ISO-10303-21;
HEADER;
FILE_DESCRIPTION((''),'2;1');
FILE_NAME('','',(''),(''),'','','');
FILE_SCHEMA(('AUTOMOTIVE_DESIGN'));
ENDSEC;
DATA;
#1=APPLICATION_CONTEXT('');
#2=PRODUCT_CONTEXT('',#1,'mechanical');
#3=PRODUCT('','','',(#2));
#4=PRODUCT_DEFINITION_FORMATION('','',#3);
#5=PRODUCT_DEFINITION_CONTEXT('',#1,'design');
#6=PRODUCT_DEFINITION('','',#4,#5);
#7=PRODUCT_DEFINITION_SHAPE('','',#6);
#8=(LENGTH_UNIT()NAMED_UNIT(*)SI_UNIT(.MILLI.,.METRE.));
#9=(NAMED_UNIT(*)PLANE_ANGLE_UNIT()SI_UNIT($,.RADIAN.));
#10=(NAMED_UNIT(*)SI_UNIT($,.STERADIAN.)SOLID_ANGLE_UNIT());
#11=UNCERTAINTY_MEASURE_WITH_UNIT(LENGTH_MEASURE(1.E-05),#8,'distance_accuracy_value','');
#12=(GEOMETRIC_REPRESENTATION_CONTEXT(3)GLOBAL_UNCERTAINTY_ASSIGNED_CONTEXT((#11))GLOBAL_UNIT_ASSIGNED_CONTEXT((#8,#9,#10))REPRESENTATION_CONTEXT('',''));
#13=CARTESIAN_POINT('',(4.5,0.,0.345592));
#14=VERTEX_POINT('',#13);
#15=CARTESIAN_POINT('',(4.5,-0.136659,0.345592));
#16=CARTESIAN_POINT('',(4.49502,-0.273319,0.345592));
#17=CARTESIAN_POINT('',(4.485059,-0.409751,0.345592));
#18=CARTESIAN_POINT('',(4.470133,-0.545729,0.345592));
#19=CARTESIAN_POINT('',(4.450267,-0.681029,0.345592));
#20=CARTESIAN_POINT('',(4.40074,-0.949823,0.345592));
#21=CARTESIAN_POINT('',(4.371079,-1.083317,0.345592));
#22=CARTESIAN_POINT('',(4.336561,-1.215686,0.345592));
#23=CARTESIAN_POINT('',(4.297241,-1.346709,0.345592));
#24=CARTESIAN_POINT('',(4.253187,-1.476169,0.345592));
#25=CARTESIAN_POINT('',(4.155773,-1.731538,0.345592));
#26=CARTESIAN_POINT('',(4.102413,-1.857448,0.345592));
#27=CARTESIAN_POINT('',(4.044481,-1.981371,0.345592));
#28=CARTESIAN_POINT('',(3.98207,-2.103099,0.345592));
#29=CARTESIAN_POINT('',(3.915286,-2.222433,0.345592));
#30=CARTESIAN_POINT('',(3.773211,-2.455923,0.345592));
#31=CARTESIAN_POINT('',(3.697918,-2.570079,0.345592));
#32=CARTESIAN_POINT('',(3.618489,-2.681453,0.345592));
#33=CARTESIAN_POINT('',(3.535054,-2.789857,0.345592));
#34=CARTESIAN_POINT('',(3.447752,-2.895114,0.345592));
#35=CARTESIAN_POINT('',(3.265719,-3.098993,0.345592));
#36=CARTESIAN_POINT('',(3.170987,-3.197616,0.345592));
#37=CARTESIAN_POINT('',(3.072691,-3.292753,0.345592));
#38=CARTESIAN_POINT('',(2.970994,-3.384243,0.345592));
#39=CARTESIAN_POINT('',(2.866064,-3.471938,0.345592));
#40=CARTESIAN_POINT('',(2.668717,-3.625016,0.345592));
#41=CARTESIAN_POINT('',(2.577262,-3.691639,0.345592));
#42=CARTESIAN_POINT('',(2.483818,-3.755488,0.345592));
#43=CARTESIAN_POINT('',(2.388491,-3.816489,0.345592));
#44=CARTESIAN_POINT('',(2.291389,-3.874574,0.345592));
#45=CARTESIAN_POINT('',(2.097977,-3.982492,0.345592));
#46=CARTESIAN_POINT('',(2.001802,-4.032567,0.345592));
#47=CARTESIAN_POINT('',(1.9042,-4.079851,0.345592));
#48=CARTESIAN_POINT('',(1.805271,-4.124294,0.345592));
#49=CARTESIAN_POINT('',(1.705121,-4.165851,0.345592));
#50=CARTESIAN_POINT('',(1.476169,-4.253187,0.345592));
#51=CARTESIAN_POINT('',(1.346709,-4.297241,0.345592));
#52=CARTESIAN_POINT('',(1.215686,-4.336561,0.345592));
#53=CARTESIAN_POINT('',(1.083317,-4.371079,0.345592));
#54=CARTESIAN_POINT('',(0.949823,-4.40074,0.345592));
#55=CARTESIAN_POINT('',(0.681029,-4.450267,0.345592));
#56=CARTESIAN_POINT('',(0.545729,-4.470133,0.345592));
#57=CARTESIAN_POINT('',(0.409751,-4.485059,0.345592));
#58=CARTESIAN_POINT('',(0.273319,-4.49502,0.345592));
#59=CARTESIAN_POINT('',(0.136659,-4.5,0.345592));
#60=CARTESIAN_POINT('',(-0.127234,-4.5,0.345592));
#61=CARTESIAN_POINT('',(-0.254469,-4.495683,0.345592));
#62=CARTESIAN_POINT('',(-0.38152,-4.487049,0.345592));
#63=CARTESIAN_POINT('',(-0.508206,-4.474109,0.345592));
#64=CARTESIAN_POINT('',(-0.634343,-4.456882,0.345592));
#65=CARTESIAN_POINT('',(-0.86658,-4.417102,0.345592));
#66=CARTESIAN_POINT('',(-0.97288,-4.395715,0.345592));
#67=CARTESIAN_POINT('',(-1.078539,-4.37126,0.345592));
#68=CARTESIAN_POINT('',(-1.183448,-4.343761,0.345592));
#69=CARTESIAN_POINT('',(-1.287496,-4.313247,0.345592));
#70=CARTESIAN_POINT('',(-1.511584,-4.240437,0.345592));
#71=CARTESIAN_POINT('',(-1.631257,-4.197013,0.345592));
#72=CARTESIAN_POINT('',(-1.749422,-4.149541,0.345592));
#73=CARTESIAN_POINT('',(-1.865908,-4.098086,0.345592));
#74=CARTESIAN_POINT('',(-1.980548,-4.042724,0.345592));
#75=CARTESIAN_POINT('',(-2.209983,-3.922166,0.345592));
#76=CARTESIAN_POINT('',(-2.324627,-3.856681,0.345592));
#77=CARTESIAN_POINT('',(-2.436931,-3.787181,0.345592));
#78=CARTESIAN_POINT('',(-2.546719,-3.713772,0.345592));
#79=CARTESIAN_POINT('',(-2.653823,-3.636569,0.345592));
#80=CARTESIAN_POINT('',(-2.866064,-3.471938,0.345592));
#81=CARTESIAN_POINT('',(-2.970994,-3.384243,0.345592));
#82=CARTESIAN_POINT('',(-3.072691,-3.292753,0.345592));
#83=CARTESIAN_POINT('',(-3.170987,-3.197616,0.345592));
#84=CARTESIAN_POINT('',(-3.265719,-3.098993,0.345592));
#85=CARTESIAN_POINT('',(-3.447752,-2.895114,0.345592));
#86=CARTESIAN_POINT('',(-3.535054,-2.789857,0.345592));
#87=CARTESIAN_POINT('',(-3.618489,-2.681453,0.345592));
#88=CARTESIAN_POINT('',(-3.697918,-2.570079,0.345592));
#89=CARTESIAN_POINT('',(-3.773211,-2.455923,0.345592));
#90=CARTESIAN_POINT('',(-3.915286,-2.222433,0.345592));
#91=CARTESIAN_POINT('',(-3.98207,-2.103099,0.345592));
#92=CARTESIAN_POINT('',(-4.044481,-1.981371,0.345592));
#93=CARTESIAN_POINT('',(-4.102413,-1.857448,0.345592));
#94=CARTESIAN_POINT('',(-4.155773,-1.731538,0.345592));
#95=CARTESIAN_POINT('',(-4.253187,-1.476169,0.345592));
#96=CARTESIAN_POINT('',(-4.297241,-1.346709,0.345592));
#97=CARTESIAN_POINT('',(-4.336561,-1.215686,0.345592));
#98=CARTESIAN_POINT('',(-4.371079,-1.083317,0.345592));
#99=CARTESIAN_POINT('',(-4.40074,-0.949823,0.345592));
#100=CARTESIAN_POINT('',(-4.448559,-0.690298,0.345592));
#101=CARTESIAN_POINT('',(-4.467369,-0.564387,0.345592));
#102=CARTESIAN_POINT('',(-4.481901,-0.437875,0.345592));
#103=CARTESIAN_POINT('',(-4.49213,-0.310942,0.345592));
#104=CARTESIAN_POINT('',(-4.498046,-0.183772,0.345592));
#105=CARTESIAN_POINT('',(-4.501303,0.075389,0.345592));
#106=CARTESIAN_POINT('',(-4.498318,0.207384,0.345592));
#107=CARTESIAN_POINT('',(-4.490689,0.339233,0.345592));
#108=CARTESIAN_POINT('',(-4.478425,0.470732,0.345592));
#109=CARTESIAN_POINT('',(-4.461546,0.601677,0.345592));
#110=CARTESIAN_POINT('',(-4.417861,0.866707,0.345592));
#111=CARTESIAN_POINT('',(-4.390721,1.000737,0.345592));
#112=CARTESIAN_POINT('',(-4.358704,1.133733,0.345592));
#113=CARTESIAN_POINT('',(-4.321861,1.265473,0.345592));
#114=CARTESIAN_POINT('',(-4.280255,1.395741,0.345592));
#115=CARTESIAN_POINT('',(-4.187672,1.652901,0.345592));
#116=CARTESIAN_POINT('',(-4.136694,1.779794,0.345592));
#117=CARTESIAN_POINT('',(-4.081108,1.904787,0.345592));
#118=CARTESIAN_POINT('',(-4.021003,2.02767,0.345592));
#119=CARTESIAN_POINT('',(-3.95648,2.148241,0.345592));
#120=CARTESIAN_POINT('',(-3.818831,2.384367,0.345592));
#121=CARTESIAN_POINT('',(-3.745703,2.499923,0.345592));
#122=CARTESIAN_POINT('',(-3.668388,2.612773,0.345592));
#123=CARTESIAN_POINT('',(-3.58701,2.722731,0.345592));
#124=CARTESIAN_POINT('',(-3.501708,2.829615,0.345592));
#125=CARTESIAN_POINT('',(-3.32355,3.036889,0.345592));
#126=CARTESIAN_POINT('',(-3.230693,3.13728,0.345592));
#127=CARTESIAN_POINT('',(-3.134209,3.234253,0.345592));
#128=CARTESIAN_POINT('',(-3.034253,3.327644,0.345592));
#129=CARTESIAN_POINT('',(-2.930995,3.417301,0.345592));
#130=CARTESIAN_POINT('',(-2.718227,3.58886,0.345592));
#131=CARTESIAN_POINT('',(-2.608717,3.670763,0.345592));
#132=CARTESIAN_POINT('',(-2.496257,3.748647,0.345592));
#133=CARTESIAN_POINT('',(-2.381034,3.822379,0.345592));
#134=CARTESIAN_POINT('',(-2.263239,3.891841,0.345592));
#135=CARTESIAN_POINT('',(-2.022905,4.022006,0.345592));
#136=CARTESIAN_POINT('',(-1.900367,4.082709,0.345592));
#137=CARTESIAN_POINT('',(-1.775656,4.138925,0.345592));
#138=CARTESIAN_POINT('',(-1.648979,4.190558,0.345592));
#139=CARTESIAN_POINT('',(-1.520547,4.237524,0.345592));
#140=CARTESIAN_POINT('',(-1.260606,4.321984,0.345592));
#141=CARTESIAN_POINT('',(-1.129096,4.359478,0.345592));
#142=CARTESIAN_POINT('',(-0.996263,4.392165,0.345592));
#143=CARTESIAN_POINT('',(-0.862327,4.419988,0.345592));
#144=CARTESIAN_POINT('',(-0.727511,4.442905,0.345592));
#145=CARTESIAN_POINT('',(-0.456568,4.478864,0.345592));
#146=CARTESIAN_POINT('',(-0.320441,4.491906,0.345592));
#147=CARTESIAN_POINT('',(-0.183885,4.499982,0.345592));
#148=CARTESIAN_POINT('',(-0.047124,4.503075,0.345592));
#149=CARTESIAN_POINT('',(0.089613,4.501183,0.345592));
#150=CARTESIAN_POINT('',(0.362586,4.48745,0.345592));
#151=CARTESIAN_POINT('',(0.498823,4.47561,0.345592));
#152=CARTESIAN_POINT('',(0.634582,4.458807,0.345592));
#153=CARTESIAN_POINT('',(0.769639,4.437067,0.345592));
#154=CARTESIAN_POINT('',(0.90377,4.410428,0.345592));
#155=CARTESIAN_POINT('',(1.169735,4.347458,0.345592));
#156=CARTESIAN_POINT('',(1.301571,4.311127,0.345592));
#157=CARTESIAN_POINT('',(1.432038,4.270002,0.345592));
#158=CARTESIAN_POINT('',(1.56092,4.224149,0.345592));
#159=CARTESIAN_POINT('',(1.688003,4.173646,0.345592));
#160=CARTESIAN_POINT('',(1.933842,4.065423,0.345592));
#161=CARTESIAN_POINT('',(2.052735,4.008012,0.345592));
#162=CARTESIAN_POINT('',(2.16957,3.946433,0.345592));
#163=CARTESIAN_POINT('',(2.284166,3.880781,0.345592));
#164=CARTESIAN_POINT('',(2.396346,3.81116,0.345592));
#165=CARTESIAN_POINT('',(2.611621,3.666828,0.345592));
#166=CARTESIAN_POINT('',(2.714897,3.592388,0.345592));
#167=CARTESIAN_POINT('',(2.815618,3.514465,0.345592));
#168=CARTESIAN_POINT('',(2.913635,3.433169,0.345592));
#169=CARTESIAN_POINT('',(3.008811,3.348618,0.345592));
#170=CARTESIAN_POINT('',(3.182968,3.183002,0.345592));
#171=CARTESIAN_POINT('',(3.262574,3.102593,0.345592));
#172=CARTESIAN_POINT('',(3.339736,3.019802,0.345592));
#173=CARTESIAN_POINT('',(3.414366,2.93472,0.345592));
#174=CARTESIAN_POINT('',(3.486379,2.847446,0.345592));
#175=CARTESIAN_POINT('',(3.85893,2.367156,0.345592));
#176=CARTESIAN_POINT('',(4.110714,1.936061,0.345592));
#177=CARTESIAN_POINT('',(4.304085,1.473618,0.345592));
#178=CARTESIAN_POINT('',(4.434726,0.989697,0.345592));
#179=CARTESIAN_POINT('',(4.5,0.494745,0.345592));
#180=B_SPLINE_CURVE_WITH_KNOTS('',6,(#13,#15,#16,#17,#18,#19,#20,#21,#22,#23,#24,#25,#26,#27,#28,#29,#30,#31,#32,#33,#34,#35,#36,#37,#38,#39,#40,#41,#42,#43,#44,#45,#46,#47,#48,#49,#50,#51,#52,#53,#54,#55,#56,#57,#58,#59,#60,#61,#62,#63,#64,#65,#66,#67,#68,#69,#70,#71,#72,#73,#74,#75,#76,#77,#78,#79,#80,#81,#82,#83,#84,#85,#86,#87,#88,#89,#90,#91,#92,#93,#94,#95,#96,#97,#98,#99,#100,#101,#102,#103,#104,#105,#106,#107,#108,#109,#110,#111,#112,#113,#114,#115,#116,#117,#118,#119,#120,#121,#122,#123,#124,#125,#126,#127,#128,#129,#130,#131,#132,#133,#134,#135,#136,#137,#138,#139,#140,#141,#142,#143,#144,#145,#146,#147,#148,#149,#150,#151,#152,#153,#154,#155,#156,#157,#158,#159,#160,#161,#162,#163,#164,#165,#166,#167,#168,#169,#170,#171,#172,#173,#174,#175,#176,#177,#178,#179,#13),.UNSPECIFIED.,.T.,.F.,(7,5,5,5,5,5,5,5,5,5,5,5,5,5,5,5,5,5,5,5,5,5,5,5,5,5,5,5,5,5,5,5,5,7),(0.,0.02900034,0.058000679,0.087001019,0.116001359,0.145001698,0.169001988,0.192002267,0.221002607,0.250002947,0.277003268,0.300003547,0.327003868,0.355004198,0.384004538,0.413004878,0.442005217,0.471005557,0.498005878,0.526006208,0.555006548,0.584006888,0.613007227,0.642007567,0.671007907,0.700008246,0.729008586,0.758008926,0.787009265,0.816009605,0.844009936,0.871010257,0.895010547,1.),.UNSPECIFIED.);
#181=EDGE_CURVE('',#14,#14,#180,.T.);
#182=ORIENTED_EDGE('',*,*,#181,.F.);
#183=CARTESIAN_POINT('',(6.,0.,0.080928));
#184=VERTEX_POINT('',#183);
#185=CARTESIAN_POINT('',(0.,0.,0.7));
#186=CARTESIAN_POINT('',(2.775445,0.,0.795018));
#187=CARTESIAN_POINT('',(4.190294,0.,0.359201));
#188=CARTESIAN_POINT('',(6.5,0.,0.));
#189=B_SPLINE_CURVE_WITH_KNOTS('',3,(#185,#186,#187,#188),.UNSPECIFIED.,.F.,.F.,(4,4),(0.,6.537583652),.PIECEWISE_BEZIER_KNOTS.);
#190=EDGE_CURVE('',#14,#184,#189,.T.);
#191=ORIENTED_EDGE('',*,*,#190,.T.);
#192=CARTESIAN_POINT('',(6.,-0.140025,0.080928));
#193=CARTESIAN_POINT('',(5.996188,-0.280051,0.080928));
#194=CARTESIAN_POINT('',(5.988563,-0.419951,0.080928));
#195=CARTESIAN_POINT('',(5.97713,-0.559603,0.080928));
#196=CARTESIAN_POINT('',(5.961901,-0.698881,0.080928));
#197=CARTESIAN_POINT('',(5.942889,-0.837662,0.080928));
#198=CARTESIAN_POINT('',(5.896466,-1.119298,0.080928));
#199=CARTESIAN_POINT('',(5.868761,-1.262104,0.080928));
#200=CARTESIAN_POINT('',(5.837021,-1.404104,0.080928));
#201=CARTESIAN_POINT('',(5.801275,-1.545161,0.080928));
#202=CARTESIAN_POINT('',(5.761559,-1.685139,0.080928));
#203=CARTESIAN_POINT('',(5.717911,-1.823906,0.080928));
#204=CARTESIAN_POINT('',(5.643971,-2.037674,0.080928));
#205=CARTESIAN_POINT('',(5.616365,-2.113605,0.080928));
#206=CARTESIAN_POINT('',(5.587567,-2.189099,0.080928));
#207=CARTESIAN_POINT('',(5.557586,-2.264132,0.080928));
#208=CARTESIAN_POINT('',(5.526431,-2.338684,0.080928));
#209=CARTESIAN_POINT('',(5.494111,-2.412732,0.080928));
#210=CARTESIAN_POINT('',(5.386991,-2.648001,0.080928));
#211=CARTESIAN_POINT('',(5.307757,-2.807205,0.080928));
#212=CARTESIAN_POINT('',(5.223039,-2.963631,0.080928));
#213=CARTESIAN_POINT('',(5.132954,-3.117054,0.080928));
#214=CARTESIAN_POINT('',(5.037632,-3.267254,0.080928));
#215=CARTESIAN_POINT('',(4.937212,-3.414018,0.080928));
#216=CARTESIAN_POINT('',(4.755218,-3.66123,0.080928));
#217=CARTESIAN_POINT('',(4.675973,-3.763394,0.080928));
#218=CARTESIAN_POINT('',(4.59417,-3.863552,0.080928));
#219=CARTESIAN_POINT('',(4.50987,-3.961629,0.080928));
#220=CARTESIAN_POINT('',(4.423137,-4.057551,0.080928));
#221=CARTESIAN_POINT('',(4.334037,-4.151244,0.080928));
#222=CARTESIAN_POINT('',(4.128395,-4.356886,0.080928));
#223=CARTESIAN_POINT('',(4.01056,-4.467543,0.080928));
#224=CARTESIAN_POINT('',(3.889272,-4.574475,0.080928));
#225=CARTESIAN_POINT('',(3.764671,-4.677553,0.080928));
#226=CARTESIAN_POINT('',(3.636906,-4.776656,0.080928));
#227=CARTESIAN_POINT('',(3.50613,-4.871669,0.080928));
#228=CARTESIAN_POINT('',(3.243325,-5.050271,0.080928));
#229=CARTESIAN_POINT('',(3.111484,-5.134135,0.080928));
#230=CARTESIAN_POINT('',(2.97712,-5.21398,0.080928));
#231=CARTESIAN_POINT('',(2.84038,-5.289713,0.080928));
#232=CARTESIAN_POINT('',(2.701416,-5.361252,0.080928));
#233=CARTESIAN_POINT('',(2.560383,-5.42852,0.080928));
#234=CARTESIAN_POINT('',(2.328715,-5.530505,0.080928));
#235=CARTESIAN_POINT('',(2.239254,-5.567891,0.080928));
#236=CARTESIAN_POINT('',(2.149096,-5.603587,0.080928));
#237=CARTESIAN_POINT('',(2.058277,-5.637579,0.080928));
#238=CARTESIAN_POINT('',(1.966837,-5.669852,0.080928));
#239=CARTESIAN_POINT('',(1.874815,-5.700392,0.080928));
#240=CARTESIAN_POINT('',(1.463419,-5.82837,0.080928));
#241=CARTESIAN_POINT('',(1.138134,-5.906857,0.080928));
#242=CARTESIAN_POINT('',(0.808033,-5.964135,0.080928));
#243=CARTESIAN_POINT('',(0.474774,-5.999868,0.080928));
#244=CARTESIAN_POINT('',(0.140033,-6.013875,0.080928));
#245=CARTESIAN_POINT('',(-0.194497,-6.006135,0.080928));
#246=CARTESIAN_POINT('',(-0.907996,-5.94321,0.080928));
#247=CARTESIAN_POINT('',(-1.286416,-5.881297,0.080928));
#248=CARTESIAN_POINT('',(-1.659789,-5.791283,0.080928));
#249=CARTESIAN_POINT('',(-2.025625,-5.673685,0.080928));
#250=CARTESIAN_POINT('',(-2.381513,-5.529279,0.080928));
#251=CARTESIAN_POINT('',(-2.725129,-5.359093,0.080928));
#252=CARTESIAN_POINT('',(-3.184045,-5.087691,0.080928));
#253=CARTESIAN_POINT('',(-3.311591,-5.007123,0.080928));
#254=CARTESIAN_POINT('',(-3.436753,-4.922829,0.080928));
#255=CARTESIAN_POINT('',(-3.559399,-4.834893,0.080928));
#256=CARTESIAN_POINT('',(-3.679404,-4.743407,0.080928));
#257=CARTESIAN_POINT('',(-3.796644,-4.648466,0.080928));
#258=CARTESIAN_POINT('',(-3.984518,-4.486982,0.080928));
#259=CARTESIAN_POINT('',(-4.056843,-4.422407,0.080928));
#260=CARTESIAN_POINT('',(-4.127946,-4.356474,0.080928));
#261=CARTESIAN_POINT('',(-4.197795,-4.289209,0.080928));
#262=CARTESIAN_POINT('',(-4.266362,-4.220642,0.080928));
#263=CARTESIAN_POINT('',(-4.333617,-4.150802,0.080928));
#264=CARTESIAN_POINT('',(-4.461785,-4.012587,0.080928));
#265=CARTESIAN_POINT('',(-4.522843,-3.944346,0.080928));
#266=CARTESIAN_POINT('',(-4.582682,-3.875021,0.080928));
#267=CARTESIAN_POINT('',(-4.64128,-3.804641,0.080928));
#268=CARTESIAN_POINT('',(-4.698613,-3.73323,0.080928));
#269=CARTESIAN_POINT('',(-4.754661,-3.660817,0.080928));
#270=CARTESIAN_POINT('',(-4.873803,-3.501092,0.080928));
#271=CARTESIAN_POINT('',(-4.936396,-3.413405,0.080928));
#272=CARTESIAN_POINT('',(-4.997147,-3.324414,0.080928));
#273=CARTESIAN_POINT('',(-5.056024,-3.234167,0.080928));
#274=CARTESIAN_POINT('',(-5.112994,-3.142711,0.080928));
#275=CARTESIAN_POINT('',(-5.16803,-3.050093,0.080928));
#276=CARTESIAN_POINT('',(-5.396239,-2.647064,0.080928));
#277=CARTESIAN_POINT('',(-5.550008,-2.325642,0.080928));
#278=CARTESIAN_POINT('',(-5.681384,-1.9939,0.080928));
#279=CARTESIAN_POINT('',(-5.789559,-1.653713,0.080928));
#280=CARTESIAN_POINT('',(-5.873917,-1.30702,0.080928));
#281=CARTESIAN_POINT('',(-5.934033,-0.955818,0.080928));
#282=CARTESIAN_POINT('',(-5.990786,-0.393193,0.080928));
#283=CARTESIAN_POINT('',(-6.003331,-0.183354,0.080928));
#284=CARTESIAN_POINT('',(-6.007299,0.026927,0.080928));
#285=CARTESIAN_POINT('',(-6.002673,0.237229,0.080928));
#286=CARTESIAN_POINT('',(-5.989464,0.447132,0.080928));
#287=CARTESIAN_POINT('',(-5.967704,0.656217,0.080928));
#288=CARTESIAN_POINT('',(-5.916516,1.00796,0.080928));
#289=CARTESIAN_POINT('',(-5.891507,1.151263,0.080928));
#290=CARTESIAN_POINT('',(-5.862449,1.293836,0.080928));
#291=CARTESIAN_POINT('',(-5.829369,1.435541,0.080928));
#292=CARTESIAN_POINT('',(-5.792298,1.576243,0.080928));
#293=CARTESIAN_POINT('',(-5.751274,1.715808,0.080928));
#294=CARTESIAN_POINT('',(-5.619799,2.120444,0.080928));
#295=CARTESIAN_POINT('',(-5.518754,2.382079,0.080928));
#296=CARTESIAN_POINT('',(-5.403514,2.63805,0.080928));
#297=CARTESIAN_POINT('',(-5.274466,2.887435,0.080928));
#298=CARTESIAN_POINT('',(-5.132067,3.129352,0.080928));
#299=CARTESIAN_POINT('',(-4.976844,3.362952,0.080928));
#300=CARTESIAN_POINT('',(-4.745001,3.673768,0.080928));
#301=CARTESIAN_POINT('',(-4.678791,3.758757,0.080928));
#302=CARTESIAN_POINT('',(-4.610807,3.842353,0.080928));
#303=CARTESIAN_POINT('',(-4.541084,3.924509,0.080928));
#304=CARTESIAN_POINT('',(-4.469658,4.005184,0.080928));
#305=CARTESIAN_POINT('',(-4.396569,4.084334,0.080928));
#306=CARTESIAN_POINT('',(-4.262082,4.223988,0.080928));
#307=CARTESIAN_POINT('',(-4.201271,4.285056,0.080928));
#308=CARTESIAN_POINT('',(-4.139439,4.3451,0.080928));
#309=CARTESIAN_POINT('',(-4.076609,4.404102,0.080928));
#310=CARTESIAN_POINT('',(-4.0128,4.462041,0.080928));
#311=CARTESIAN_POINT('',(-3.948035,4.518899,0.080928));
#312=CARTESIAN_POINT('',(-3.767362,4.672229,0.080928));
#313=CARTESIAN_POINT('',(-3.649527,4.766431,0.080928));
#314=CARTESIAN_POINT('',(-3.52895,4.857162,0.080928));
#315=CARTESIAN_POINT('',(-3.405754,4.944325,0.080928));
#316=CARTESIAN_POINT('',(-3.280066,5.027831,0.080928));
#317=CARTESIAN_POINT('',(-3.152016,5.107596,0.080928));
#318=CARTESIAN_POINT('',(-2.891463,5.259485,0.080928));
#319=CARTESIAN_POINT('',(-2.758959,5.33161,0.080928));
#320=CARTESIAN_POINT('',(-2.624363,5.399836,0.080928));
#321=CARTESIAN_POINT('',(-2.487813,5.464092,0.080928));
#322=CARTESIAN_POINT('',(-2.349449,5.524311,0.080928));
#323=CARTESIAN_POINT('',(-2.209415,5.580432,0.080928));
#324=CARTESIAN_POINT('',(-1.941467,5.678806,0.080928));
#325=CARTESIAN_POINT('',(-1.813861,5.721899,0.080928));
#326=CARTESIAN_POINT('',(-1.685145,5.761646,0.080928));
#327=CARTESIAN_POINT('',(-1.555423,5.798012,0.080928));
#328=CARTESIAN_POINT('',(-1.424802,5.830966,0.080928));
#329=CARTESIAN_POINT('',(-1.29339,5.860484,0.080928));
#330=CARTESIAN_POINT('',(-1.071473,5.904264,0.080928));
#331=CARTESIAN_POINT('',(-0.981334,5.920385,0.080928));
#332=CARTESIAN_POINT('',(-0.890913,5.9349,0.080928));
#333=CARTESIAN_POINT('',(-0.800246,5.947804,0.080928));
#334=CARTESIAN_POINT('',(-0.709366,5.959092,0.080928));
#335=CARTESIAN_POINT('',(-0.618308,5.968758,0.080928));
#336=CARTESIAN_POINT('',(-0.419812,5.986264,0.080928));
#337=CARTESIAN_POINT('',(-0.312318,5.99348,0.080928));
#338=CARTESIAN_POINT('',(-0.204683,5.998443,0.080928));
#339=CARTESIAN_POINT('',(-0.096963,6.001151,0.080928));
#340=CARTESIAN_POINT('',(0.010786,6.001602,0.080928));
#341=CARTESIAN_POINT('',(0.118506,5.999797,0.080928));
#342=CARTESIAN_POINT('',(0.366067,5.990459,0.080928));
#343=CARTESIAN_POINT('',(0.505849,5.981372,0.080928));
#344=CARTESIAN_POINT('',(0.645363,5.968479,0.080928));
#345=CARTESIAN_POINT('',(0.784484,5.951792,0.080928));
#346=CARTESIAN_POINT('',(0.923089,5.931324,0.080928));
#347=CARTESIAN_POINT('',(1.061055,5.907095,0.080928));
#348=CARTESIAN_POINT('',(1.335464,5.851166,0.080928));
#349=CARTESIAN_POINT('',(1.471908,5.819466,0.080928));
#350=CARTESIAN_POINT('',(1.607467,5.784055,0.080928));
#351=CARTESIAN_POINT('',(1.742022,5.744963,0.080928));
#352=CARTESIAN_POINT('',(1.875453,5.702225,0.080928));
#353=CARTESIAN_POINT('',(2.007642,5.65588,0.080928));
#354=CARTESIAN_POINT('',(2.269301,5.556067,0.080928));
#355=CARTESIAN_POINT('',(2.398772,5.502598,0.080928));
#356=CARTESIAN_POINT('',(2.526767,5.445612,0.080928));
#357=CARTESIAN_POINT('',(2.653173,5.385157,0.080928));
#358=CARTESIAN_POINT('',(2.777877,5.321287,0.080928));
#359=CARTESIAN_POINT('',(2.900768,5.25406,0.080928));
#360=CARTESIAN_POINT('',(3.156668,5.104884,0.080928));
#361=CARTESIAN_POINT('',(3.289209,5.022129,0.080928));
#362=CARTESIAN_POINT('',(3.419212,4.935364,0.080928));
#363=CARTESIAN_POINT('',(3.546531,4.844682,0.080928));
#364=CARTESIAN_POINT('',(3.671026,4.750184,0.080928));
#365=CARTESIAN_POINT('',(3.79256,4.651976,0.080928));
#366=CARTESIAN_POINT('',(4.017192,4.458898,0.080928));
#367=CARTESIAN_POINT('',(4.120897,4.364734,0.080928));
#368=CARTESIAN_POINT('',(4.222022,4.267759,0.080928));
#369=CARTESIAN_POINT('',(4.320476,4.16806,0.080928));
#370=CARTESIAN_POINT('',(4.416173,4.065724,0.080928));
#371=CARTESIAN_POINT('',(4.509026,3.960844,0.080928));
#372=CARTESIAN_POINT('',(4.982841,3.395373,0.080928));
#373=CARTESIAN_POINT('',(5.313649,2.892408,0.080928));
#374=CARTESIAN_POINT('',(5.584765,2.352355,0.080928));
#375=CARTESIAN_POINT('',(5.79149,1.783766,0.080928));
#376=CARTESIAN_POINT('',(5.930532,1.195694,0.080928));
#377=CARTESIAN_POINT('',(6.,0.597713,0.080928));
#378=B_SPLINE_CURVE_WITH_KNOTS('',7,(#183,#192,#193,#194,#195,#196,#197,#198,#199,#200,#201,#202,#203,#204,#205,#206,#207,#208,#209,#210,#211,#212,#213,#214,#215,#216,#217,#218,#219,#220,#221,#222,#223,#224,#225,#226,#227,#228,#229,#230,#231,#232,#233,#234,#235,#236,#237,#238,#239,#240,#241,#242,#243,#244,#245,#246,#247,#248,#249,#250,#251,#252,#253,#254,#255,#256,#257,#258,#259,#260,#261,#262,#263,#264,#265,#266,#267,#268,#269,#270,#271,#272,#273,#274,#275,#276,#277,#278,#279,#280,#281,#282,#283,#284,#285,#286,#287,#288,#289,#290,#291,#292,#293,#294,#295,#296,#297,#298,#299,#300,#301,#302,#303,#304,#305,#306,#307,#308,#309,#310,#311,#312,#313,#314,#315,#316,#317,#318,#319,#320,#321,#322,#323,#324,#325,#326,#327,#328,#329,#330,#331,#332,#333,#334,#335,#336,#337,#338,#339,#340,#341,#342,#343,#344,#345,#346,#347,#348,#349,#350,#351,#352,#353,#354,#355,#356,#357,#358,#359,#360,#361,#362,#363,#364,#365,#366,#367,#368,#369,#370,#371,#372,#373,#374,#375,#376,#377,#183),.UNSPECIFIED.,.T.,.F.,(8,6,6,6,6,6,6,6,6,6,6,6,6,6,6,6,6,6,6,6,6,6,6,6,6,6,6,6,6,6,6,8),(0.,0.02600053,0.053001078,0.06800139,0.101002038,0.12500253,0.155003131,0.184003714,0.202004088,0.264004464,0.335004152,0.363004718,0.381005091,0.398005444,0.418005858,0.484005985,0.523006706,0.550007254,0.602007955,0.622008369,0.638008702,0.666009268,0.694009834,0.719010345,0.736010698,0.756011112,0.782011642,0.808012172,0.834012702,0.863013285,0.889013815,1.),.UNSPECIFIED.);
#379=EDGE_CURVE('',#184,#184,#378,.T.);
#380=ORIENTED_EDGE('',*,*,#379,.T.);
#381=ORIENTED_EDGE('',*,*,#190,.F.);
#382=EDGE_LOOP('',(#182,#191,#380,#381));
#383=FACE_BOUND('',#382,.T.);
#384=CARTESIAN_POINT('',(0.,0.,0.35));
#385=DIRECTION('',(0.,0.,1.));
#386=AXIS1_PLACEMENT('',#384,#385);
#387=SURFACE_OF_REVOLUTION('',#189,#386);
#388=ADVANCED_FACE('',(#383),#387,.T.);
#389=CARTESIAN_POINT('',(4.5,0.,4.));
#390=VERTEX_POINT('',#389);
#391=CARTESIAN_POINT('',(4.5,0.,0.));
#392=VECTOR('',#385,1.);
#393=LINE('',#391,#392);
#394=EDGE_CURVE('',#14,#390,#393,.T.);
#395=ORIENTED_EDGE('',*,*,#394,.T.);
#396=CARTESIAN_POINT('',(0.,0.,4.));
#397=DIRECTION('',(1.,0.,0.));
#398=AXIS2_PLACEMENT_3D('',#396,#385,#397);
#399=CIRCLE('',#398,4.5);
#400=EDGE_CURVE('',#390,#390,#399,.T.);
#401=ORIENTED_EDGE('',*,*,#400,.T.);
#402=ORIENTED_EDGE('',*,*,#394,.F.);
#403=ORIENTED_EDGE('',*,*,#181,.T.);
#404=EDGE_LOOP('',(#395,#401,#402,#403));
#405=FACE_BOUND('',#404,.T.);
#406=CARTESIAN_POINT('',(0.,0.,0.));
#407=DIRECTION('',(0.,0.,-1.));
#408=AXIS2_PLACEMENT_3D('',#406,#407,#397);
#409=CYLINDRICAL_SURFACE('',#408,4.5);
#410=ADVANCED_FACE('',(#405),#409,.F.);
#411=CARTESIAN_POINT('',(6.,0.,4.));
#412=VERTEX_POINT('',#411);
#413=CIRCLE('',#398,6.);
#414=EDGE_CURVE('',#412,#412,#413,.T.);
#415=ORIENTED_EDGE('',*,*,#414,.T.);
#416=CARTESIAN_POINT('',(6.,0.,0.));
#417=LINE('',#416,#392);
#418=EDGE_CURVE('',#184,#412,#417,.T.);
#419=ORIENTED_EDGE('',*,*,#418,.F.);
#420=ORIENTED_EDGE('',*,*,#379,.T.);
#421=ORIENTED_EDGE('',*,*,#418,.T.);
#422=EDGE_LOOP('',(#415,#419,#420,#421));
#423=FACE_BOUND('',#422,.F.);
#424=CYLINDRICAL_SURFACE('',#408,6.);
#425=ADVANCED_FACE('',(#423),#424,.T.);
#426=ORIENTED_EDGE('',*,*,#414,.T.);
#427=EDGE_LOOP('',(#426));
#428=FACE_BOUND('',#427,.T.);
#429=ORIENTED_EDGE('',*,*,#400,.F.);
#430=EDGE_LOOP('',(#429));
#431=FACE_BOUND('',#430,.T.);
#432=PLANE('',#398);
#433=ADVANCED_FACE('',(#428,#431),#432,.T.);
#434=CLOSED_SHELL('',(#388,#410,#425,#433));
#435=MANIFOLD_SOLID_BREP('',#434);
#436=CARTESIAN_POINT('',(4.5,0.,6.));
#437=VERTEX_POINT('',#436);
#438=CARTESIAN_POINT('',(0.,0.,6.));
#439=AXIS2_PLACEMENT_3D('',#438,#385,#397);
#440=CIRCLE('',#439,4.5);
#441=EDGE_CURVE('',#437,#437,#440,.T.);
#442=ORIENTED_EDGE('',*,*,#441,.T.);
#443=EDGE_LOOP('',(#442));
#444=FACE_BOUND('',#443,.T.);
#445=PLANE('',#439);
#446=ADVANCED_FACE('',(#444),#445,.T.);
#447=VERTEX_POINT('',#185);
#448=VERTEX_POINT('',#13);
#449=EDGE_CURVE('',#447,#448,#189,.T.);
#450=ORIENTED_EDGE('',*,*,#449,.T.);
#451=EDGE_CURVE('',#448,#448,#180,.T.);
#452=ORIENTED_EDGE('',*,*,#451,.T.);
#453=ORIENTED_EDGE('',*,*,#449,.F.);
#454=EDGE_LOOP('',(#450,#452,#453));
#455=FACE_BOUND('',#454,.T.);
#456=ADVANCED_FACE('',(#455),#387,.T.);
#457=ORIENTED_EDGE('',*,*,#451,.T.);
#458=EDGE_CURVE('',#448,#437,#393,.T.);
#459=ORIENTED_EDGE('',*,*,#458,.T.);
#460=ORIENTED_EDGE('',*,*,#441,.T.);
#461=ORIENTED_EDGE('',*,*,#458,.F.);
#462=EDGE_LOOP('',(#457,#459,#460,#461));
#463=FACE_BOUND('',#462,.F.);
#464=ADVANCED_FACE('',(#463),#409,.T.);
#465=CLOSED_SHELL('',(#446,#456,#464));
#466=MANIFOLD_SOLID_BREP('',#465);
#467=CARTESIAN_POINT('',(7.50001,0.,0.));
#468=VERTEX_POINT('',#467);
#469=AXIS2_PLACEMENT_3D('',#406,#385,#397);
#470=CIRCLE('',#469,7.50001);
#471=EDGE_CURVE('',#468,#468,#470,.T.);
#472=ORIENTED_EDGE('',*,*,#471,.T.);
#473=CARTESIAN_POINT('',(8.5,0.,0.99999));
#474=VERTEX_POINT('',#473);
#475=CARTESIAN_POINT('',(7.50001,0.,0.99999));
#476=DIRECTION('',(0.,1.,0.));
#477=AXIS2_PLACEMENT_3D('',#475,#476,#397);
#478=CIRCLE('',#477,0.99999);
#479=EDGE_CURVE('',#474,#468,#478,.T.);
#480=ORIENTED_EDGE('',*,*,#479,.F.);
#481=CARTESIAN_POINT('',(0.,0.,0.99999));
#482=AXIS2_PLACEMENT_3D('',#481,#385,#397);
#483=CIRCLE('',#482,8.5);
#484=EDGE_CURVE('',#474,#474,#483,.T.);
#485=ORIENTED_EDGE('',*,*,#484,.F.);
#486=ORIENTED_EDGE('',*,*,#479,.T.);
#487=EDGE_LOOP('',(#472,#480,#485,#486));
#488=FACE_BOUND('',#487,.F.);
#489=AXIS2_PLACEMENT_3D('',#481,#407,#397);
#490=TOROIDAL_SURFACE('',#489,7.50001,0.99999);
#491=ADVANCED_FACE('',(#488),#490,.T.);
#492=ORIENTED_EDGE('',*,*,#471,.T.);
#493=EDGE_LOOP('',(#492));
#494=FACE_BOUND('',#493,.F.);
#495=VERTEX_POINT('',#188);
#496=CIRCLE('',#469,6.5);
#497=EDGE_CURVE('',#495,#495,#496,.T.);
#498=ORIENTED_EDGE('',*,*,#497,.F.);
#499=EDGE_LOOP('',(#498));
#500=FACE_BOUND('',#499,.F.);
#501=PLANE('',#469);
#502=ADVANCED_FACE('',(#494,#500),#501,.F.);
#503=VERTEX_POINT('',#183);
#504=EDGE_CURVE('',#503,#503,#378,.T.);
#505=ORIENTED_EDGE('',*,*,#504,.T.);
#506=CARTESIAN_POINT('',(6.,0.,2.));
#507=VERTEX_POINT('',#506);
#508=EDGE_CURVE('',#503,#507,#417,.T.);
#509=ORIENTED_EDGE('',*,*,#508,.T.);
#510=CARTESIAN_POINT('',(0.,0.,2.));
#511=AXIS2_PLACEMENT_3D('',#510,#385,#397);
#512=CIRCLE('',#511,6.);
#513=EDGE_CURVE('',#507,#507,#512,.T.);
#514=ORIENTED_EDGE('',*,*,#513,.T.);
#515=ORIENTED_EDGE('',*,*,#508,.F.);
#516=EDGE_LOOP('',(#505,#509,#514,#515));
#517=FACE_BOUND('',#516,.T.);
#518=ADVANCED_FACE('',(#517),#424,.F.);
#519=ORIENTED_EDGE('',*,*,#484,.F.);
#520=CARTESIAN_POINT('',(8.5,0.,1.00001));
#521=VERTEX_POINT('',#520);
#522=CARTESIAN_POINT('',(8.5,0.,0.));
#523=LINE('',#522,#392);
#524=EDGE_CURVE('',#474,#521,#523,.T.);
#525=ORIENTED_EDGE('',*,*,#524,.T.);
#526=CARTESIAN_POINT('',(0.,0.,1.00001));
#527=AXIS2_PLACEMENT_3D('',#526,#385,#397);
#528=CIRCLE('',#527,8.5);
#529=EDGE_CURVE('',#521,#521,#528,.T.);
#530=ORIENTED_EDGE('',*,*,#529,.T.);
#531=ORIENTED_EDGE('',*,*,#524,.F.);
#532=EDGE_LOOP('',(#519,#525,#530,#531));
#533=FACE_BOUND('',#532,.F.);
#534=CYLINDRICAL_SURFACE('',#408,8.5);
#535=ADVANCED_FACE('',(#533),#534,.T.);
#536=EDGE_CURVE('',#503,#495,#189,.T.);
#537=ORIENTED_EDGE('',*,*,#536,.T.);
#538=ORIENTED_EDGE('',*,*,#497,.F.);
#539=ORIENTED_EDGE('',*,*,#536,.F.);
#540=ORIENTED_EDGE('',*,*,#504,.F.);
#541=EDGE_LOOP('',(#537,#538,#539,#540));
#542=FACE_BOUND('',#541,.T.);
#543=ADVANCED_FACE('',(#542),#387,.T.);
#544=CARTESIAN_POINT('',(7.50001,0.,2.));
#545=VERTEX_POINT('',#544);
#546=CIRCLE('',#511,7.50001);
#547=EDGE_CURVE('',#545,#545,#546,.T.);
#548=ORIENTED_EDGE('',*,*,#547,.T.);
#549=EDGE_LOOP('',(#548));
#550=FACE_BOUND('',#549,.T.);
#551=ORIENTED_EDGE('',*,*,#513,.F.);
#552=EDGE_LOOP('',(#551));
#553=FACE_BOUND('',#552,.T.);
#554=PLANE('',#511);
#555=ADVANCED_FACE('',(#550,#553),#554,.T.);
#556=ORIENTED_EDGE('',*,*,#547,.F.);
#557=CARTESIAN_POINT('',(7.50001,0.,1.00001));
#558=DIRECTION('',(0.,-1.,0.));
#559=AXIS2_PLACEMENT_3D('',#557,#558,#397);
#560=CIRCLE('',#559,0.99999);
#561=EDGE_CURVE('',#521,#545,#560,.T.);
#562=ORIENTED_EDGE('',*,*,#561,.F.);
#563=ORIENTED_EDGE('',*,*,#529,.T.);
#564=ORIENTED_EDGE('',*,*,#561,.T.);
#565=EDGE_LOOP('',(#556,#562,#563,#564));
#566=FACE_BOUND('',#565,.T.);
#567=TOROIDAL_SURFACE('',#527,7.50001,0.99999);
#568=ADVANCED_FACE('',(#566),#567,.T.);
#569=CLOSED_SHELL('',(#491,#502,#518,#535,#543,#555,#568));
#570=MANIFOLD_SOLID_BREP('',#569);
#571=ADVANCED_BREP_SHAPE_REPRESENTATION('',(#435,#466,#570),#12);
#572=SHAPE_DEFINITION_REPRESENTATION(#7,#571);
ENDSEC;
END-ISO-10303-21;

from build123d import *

# Parameters (mm, degrees)
F0_R     = 4.5
F1_DEPTH = 6
F0_R_2   = 6
F2_DEPTH = 4
F0_R_3   = 8.5
F3_DEPTH = 2
F4_R     = 0.99999


# Not quite as in the source:
# - a fillet or chamfer is up to 0.001 mm smaller than in the source, because OpenCascade refuses the exact size


with BuildPart() as f1:
    # F0 (on Top) → F1 (new body)
    with BuildSketch(Plane.XY):
        Circle(F0_R)
    extrude(amount=F1_DEPTH)


with BuildPart() as f2:
    # F0 (on Top) → F2 (new body)
    with BuildSketch(Plane.XY):
        Circle(F0_R_2)
        Circle(F0_R, mode=Mode.SUBTRACT)
    extrude(amount=F2_DEPTH)


with BuildPart() as f3:
    # F0 (on Top) → F3 (new body)
    with BuildSketch(Plane.XY):
        Circle(F0_R_3)
        Circle(F0_R_2, mode=Mode.SUBTRACT)
    extrude(amount=F3_DEPTH)

    # F4 (radius 1 in the source; OpenCascade refuses exactly that, so slightly less here)
    f4_edges = [f3.edges().sort_by_distance(p)[0] for p in [
        (-8.5, 0, 0),
        (-8.5, 0, 2),
    ]]
    fillet(f4_edges, radius=F4_R)


with BuildPart() as f6_tool:
    # F5 (on Front) → F6 (revolve)
    with BuildSketch(Plane.XZ):
        with BuildLine():
            Line((0, 0.7), (0, 0))
            Line((0, 0), (6.5, 0))
            add(Edge.make_bspline(
                [(0, 0.7), (2.7754448838, 0.7950184902), (4.1902936064, 0.3592014255), (6.5, 0)],
                knots=[0, 0, 0, 0, 6.5375836515, 6.5375836515, 6.5375836515, 6.5375836515], degree=3))
        make_face()
    revolve(axis=Axis((0, 0, 0.35), (0, 0, 1)))


with BuildPart() as f1_1:
    add(f1.part)

    # F6: cut by f6_tool
    add(f6_tool.part, mode=Mode.SUBTRACT)


with BuildPart() as f2_1:
    add(f2.part)

    # F6: cut by f6_tool
    add(f6_tool.part, mode=Mode.SUBTRACT)


with BuildPart() as f3_1:
    add(f3.part)

    # F6: cut by f6_tool
    add(f6_tool.part, mode=Mode.SUBTRACT)


solid = Compound([f1_1.part, f2_1.part, f3_1.part])
